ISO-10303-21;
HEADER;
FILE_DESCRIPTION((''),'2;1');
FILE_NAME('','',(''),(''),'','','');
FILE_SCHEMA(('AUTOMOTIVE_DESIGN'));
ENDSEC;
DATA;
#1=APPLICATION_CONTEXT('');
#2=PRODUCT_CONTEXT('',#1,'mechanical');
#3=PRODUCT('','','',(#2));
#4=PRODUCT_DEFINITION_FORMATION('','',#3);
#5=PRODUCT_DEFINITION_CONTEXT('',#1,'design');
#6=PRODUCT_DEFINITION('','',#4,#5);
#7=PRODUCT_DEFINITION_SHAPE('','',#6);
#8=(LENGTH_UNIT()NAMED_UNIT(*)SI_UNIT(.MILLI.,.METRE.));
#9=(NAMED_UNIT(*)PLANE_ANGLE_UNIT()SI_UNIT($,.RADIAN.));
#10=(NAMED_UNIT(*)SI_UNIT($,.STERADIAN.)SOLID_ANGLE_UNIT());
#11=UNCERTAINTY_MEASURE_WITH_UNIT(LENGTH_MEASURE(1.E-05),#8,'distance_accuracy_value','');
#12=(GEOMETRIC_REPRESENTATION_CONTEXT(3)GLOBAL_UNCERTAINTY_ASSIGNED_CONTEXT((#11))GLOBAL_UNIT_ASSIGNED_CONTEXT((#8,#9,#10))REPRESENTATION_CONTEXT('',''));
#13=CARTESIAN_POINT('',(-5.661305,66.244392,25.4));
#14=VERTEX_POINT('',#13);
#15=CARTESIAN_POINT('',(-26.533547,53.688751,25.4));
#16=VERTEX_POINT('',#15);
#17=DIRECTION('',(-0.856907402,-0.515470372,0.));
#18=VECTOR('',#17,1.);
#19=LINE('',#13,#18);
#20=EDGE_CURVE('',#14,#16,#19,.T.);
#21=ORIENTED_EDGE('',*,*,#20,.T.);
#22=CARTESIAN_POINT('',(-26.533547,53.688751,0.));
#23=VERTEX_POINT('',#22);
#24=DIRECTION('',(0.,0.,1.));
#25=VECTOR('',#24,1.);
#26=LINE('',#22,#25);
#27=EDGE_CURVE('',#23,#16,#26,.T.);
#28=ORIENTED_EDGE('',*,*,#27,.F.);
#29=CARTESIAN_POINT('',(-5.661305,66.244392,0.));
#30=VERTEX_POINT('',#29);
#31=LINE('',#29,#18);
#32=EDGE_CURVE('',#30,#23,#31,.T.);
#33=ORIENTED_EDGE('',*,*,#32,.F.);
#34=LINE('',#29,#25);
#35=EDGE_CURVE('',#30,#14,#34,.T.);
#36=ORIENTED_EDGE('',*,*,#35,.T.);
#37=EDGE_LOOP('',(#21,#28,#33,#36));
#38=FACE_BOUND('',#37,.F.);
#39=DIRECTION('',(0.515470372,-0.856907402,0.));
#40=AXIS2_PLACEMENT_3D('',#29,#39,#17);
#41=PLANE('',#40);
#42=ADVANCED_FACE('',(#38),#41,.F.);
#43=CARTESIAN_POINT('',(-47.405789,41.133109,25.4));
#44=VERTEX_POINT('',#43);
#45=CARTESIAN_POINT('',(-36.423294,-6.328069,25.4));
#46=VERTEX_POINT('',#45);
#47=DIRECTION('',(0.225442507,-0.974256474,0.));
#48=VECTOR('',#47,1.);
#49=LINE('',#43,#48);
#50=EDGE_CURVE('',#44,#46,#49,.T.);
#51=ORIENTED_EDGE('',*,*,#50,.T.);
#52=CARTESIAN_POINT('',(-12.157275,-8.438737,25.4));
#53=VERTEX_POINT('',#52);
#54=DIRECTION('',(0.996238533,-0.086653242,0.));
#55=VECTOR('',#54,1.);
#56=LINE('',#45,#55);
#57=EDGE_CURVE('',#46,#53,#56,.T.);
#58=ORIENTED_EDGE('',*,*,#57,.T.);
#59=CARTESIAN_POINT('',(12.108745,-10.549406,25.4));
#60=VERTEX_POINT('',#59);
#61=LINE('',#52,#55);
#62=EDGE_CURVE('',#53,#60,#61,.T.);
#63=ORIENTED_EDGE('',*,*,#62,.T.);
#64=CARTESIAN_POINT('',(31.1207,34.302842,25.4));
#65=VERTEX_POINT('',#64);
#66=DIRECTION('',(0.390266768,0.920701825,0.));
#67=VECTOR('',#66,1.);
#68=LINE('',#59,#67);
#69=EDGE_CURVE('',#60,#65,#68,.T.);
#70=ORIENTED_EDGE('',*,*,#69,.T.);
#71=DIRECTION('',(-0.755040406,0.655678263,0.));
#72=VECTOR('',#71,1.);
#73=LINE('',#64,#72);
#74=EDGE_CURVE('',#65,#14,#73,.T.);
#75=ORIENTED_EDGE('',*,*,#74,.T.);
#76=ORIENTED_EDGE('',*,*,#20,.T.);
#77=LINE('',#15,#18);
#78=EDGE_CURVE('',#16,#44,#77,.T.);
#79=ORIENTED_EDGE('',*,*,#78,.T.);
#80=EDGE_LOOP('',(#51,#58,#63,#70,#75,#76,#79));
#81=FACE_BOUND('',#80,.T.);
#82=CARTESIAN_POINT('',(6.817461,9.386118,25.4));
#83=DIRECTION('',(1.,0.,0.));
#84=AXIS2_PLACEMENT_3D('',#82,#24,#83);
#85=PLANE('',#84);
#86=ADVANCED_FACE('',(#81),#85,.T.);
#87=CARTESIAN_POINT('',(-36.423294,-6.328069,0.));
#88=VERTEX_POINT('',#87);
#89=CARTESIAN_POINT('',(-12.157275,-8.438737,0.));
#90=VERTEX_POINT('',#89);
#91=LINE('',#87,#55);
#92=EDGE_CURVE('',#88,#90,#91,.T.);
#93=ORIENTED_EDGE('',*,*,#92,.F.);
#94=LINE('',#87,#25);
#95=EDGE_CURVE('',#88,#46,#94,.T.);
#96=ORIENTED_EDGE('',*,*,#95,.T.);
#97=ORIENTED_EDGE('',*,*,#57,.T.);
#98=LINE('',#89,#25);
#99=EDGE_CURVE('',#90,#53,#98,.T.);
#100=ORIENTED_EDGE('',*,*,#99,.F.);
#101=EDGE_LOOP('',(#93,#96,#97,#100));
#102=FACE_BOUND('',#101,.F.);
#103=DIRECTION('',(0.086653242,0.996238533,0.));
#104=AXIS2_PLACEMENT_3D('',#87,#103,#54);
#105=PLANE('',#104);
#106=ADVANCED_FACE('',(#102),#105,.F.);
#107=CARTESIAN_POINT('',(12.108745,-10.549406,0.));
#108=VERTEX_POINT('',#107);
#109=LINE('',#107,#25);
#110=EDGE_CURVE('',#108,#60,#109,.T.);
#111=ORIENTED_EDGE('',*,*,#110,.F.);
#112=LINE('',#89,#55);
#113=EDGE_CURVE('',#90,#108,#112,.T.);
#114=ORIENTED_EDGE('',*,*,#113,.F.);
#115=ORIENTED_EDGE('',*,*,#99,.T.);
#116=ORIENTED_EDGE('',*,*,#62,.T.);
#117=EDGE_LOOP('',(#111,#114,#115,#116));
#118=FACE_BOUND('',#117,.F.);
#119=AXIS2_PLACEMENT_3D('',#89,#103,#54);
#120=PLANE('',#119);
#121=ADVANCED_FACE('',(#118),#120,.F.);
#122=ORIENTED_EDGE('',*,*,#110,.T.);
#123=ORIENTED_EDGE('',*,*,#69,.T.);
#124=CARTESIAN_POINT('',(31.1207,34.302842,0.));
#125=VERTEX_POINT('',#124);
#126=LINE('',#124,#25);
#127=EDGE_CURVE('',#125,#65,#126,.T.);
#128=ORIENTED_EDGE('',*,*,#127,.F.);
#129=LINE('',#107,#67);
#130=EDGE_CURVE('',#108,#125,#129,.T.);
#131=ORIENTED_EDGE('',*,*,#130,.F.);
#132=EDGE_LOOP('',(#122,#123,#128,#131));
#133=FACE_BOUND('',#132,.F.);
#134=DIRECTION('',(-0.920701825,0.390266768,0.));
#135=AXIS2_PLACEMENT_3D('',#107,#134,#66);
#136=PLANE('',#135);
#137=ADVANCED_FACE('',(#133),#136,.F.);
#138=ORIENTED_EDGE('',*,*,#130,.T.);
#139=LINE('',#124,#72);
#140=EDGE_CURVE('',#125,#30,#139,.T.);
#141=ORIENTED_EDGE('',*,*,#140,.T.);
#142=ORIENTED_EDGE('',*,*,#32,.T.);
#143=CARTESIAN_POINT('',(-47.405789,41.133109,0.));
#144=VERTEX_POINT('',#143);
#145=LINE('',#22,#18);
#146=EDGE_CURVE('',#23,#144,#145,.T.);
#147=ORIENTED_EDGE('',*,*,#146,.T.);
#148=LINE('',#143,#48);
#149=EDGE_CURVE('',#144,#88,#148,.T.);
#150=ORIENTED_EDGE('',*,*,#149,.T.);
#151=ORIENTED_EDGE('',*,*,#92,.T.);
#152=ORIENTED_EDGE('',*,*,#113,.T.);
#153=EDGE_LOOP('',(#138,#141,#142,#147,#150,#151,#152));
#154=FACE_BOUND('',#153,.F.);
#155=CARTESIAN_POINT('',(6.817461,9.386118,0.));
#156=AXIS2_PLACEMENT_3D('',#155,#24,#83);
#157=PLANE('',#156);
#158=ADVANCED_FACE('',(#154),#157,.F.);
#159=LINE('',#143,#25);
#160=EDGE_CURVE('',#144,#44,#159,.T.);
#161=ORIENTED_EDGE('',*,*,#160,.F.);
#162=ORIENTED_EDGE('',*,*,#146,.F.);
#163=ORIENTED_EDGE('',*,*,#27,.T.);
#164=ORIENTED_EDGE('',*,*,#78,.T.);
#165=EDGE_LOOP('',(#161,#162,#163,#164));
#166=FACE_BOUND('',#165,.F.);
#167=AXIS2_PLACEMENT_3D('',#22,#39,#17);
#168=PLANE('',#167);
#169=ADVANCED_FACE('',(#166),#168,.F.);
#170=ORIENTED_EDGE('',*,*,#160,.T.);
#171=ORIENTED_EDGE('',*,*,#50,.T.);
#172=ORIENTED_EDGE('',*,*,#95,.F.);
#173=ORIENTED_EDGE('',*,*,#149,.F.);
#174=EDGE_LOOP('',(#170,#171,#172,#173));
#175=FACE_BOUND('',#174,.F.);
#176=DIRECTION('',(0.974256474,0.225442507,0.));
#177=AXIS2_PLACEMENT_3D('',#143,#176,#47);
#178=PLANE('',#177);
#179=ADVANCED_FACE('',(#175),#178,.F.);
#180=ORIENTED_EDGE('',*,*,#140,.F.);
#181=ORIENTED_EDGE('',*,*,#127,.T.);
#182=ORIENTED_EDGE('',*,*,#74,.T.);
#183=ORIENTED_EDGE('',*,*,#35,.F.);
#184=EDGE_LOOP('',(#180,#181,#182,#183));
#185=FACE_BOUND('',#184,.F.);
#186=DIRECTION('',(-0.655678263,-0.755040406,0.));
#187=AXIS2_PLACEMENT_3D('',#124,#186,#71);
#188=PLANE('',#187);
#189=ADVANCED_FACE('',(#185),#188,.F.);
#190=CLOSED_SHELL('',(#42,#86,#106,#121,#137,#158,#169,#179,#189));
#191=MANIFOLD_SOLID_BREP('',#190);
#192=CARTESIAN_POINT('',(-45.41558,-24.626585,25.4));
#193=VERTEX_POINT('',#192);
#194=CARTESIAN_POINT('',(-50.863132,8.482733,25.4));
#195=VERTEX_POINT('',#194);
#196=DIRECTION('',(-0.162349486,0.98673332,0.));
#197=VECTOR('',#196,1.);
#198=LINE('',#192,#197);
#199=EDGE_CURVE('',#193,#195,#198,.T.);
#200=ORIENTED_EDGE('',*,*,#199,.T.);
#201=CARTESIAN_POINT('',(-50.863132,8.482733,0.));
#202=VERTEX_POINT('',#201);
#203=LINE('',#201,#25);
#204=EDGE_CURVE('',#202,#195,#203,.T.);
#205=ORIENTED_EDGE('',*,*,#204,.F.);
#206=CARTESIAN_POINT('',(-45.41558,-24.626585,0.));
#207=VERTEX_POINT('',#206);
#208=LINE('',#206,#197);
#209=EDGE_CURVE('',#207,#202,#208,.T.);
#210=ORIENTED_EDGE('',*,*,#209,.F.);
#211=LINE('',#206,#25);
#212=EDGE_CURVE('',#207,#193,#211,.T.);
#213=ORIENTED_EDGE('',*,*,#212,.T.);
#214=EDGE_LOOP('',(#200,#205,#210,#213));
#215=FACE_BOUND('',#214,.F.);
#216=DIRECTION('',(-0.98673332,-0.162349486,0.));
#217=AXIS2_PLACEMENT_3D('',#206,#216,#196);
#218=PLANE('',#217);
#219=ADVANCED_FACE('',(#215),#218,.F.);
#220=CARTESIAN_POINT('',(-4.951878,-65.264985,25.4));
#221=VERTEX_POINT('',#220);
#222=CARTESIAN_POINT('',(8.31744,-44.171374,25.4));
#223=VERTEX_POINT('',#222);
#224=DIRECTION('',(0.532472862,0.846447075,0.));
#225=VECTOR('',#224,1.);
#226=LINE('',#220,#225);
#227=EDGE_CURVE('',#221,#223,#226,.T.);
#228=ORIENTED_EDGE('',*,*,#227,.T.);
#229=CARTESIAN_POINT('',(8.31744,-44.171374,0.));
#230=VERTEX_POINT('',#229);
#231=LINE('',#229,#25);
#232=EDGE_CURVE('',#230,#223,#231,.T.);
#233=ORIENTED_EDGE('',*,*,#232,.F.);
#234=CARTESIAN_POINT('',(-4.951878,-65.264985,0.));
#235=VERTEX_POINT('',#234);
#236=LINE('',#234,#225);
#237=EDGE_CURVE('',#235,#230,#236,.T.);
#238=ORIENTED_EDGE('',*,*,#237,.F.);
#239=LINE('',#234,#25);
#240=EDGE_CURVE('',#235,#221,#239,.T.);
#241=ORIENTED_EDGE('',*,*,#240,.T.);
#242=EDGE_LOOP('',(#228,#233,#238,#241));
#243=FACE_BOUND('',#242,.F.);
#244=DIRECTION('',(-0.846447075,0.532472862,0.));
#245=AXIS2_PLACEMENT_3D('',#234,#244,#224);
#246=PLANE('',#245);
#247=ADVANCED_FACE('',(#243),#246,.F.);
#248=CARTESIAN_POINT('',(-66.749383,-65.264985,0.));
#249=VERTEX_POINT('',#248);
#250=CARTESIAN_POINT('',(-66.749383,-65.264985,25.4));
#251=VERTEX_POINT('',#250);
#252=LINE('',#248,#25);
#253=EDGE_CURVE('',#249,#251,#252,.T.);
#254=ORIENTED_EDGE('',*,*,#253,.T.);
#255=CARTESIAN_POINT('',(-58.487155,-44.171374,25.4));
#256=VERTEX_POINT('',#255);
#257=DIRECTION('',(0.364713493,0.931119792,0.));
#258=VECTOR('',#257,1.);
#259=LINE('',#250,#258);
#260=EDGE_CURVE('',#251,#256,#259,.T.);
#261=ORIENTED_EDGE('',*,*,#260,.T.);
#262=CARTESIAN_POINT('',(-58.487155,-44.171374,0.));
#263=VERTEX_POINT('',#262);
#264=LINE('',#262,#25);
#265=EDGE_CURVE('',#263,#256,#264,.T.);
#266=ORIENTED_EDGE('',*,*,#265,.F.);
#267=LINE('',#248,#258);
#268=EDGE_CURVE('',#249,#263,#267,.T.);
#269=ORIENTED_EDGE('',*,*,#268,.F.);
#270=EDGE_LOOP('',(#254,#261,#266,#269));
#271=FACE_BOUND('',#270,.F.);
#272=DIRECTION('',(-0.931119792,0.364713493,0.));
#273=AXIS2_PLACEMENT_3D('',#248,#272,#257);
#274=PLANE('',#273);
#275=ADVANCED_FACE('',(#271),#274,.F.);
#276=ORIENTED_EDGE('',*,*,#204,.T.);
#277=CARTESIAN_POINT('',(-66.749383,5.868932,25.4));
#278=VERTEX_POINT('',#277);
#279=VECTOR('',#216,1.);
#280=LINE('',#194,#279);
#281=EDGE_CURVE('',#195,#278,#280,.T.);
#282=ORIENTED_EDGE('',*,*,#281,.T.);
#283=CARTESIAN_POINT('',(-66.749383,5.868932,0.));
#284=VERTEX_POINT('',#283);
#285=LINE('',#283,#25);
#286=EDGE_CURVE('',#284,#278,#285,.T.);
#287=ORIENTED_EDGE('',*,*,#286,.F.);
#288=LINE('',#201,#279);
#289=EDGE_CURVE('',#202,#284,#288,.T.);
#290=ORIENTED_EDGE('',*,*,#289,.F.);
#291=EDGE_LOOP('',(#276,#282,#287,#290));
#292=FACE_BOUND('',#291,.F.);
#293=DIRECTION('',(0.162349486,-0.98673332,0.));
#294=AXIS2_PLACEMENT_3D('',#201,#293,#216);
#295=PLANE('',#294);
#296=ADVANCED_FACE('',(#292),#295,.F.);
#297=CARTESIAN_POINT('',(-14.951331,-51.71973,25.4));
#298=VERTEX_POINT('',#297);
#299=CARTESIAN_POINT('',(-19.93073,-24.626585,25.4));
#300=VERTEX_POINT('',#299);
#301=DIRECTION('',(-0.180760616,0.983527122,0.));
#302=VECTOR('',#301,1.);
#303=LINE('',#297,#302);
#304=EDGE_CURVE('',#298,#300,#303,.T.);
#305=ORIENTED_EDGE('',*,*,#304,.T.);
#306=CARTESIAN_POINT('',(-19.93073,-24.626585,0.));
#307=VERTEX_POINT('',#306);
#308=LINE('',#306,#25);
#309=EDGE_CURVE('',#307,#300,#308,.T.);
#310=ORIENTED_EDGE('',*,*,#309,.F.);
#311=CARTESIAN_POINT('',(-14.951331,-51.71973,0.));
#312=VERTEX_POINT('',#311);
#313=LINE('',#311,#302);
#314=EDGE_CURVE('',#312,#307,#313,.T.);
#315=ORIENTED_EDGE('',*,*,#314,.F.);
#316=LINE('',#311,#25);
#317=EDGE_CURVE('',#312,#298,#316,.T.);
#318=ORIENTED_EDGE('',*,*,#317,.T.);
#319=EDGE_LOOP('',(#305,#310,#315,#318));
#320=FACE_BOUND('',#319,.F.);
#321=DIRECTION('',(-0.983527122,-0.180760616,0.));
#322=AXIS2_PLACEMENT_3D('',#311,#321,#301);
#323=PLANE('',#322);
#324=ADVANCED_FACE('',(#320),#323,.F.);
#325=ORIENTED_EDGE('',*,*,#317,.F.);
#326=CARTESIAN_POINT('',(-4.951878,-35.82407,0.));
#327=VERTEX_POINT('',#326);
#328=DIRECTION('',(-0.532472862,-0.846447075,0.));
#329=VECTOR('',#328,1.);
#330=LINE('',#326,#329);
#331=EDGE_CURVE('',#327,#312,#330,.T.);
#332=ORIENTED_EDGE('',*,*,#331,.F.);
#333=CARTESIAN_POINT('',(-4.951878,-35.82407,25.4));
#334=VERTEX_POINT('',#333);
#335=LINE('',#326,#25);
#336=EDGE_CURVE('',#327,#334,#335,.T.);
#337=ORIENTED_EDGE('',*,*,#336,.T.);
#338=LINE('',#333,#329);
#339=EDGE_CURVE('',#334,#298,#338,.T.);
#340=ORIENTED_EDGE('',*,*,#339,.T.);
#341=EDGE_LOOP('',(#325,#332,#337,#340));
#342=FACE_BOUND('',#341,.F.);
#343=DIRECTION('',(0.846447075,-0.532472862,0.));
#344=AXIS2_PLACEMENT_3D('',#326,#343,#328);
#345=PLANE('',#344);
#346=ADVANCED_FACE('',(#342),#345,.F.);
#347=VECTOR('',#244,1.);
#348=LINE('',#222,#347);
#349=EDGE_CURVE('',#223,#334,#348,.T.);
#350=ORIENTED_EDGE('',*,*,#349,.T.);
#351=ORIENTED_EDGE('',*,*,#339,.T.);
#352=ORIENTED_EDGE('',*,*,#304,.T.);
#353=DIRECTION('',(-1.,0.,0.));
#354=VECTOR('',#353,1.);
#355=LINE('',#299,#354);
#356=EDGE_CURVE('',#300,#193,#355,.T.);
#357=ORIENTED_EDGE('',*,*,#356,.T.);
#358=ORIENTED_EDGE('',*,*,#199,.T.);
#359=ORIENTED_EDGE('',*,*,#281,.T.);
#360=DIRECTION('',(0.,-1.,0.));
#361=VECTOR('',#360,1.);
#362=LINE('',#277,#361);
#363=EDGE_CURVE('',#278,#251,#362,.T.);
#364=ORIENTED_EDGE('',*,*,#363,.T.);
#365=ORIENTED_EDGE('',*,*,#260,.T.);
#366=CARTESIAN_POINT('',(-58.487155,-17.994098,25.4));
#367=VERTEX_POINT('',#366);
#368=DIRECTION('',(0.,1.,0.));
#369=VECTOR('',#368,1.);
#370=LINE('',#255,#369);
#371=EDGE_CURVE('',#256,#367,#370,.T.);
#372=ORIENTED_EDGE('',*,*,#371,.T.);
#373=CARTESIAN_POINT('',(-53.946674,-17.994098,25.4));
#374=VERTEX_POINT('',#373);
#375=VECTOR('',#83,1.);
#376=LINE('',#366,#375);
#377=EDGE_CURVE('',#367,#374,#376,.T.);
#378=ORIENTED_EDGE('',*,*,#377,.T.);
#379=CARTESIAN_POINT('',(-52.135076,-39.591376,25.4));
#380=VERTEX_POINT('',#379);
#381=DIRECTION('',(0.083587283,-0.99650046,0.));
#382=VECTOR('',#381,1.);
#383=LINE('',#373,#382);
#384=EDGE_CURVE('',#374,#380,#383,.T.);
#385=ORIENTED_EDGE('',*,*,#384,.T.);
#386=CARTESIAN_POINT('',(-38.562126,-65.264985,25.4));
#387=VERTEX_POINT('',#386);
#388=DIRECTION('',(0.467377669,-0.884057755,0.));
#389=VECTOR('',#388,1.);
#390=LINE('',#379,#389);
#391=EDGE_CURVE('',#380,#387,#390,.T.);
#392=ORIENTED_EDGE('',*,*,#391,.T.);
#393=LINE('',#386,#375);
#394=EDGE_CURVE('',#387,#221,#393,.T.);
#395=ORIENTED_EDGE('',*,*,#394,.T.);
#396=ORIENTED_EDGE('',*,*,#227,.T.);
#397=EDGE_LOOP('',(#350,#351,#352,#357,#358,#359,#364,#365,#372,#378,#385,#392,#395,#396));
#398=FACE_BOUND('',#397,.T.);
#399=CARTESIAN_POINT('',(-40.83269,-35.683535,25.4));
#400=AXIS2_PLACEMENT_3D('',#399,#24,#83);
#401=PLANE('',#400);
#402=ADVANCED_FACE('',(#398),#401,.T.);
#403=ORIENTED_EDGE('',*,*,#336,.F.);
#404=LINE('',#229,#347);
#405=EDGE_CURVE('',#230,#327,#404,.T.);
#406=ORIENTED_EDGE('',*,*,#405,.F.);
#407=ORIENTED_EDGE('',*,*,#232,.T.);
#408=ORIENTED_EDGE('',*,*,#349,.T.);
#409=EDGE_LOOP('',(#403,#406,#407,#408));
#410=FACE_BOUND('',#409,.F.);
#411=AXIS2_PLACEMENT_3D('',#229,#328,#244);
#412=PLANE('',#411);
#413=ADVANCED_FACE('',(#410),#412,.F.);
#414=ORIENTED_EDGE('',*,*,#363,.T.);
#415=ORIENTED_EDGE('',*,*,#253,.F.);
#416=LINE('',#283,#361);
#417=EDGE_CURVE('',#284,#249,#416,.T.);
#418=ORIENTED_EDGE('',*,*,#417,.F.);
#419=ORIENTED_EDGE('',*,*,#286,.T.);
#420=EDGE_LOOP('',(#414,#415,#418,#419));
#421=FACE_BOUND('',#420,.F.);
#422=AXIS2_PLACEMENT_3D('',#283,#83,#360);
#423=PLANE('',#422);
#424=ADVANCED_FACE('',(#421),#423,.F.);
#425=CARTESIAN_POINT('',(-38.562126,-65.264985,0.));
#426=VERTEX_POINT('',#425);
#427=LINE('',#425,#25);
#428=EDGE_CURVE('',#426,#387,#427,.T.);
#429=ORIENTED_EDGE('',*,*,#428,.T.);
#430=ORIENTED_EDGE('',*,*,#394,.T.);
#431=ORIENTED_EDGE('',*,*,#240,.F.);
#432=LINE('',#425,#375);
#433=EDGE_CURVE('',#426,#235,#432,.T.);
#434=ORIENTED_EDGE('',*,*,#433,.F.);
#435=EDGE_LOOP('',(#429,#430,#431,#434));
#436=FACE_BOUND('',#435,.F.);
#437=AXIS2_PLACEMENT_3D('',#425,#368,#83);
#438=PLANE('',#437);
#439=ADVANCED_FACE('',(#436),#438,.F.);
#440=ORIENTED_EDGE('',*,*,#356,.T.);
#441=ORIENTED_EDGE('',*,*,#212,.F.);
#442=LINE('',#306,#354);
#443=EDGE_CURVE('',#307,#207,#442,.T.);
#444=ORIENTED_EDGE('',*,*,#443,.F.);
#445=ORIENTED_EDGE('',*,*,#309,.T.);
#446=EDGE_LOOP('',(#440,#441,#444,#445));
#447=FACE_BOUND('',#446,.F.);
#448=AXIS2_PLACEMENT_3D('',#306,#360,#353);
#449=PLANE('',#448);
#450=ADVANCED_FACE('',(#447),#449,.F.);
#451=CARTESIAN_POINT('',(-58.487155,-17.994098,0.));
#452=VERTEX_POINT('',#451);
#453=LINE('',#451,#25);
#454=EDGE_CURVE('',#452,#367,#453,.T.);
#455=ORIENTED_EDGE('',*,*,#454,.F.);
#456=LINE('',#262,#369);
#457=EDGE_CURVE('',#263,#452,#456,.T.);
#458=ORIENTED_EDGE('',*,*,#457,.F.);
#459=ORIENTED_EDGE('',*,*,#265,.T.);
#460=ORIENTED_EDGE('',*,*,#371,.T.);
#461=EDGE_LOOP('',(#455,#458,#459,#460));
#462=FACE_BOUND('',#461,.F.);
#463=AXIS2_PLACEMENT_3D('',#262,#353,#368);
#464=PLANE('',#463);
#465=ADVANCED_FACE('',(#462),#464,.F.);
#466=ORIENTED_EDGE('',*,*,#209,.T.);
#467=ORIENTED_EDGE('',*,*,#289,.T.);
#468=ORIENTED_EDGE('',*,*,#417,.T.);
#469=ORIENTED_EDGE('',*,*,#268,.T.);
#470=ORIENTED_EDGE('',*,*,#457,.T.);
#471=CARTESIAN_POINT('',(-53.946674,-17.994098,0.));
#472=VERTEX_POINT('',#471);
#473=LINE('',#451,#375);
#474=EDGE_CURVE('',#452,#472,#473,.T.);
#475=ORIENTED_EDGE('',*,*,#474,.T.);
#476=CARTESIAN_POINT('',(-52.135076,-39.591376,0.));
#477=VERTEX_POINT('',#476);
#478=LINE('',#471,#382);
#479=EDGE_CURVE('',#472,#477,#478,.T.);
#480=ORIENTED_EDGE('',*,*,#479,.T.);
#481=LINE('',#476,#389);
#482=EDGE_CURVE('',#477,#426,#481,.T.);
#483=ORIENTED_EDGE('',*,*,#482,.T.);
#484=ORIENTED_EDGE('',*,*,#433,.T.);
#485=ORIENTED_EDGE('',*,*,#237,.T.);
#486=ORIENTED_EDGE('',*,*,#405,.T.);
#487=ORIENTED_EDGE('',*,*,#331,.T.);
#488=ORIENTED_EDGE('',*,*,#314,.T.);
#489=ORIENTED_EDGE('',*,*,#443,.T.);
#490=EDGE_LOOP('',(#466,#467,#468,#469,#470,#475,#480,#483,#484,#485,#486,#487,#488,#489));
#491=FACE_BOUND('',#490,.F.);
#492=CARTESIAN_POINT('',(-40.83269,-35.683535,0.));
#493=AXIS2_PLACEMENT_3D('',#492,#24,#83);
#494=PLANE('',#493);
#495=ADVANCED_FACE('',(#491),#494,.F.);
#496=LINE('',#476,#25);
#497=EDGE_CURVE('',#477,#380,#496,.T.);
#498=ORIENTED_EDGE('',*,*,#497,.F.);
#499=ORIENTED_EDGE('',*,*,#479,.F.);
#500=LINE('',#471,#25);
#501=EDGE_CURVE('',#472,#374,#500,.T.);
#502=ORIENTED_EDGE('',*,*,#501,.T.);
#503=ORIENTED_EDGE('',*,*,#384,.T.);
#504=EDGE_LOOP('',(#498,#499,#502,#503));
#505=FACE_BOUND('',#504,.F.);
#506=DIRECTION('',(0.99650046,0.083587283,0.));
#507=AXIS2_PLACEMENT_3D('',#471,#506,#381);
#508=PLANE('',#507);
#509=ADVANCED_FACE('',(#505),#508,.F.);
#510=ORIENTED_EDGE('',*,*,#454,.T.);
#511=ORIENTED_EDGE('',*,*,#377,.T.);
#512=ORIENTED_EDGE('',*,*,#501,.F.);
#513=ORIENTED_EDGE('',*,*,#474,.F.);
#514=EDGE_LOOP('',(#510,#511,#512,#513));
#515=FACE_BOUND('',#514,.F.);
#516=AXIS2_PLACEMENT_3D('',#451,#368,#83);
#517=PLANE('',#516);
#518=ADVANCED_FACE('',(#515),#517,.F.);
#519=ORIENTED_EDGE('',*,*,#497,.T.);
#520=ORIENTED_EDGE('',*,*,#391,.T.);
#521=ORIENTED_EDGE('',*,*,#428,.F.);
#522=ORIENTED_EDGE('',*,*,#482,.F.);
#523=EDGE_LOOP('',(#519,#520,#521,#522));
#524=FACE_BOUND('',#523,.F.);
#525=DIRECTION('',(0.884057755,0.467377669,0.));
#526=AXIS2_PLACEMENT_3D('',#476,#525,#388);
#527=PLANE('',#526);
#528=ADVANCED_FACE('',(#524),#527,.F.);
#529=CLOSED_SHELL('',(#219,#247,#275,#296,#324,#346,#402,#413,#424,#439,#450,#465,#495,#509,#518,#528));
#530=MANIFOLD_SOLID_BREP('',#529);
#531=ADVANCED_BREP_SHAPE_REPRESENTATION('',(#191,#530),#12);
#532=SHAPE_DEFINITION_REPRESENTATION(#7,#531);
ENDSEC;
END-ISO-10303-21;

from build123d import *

# Parameters (mm, degrees)
F1_DEPTH = 25.4
F5_DEPTH = 25.4


# Not quite as in the source:
# - the program builds the solid bodies; features that only make, move or delete a surface that nothing else refers to are left out


with BuildPart() as f1:
    # F0 (on Top) → F1 (new body)
    with BuildSketch(Plane.XY):
        Polygon((-9.2521887273, 24.9605737627), (12.1087450534, -10.5494055897), (21.6147225683, 11.8767181747), align=None)
        Polygon((-12.1572746882, -8.4387370915), (12.1087450534, -10.5494055897), (-9.2521887273, 24.9605737627), align=None)
        Polygon((-36.4232944299, -6.3280685934), (-12.1572746882, -8.4387370915), (-9.2521887273, 24.9605737627), align=None)
        Polygon((-9.2521887273, 24.9605737627), (21.6147225683, 11.8767181747), (31.1207000832, 34.3028419391), align=None)
        Polygon((-41.914541887, 17.4025200419), (-9.2521887273, 24.9605737627), (-47.4057893441, 41.1331086771), align=None)
        Polygon((-26.5335471715, 53.6887505286), (-9.2521887273, 24.9605737627), (-5.661304999, 66.2443923801), align=None)
        Polygon((-5.661304999, 66.2443923801), (-9.2521887273, 24.9605737627), (12.7296975421, 50.2736171596), align=None)
        Polygon((12.7296975421, 50.2736171596), (-9.2521887273, 24.9605737627), (31.1207000832, 34.3028419391), align=None)
        Polygon((-36.4232944299, -6.3280685934), (-9.2521887273, 24.9605737627), (-41.914541887, 17.4025200419), align=None)
        Polygon((-47.4057893441, 41.1331086771), (-9.2521887273, 24.9605737627), (-26.5335471715, 53.6887505286), align=None)
    extrude(amount=F1_DEPTH)


with BuildPart() as f5:
    # F4 (on Top) → F5 (new body)
    with BuildSketch(Plane.XY):
        Polygon((-53.9466738701, -17.9940983653), (-52.1350763738, -39.5913757384), (-38.5621264577, -65.2649849653), (-4.9518779851, -65.2649849653), (8.3174398169, -44.1713742912), (-4.9518779851, -35.8240696191), (-14.9513309923, -51.7197299563), (-19.9307296425, -24.6265847236), (-45.4155802727, -24.6265847236), (-50.8631318808, 8.4827328101), (-66.7493829843, 5.868931645), (-66.7493829843, -65.2649849653), (-58.4871545434, -44.1713742912), (-58.4871545434, -17.9940983653), align=None)
    extrude(amount=F5_DEPTH)


solid = Compound([f1.part, f5.part])
